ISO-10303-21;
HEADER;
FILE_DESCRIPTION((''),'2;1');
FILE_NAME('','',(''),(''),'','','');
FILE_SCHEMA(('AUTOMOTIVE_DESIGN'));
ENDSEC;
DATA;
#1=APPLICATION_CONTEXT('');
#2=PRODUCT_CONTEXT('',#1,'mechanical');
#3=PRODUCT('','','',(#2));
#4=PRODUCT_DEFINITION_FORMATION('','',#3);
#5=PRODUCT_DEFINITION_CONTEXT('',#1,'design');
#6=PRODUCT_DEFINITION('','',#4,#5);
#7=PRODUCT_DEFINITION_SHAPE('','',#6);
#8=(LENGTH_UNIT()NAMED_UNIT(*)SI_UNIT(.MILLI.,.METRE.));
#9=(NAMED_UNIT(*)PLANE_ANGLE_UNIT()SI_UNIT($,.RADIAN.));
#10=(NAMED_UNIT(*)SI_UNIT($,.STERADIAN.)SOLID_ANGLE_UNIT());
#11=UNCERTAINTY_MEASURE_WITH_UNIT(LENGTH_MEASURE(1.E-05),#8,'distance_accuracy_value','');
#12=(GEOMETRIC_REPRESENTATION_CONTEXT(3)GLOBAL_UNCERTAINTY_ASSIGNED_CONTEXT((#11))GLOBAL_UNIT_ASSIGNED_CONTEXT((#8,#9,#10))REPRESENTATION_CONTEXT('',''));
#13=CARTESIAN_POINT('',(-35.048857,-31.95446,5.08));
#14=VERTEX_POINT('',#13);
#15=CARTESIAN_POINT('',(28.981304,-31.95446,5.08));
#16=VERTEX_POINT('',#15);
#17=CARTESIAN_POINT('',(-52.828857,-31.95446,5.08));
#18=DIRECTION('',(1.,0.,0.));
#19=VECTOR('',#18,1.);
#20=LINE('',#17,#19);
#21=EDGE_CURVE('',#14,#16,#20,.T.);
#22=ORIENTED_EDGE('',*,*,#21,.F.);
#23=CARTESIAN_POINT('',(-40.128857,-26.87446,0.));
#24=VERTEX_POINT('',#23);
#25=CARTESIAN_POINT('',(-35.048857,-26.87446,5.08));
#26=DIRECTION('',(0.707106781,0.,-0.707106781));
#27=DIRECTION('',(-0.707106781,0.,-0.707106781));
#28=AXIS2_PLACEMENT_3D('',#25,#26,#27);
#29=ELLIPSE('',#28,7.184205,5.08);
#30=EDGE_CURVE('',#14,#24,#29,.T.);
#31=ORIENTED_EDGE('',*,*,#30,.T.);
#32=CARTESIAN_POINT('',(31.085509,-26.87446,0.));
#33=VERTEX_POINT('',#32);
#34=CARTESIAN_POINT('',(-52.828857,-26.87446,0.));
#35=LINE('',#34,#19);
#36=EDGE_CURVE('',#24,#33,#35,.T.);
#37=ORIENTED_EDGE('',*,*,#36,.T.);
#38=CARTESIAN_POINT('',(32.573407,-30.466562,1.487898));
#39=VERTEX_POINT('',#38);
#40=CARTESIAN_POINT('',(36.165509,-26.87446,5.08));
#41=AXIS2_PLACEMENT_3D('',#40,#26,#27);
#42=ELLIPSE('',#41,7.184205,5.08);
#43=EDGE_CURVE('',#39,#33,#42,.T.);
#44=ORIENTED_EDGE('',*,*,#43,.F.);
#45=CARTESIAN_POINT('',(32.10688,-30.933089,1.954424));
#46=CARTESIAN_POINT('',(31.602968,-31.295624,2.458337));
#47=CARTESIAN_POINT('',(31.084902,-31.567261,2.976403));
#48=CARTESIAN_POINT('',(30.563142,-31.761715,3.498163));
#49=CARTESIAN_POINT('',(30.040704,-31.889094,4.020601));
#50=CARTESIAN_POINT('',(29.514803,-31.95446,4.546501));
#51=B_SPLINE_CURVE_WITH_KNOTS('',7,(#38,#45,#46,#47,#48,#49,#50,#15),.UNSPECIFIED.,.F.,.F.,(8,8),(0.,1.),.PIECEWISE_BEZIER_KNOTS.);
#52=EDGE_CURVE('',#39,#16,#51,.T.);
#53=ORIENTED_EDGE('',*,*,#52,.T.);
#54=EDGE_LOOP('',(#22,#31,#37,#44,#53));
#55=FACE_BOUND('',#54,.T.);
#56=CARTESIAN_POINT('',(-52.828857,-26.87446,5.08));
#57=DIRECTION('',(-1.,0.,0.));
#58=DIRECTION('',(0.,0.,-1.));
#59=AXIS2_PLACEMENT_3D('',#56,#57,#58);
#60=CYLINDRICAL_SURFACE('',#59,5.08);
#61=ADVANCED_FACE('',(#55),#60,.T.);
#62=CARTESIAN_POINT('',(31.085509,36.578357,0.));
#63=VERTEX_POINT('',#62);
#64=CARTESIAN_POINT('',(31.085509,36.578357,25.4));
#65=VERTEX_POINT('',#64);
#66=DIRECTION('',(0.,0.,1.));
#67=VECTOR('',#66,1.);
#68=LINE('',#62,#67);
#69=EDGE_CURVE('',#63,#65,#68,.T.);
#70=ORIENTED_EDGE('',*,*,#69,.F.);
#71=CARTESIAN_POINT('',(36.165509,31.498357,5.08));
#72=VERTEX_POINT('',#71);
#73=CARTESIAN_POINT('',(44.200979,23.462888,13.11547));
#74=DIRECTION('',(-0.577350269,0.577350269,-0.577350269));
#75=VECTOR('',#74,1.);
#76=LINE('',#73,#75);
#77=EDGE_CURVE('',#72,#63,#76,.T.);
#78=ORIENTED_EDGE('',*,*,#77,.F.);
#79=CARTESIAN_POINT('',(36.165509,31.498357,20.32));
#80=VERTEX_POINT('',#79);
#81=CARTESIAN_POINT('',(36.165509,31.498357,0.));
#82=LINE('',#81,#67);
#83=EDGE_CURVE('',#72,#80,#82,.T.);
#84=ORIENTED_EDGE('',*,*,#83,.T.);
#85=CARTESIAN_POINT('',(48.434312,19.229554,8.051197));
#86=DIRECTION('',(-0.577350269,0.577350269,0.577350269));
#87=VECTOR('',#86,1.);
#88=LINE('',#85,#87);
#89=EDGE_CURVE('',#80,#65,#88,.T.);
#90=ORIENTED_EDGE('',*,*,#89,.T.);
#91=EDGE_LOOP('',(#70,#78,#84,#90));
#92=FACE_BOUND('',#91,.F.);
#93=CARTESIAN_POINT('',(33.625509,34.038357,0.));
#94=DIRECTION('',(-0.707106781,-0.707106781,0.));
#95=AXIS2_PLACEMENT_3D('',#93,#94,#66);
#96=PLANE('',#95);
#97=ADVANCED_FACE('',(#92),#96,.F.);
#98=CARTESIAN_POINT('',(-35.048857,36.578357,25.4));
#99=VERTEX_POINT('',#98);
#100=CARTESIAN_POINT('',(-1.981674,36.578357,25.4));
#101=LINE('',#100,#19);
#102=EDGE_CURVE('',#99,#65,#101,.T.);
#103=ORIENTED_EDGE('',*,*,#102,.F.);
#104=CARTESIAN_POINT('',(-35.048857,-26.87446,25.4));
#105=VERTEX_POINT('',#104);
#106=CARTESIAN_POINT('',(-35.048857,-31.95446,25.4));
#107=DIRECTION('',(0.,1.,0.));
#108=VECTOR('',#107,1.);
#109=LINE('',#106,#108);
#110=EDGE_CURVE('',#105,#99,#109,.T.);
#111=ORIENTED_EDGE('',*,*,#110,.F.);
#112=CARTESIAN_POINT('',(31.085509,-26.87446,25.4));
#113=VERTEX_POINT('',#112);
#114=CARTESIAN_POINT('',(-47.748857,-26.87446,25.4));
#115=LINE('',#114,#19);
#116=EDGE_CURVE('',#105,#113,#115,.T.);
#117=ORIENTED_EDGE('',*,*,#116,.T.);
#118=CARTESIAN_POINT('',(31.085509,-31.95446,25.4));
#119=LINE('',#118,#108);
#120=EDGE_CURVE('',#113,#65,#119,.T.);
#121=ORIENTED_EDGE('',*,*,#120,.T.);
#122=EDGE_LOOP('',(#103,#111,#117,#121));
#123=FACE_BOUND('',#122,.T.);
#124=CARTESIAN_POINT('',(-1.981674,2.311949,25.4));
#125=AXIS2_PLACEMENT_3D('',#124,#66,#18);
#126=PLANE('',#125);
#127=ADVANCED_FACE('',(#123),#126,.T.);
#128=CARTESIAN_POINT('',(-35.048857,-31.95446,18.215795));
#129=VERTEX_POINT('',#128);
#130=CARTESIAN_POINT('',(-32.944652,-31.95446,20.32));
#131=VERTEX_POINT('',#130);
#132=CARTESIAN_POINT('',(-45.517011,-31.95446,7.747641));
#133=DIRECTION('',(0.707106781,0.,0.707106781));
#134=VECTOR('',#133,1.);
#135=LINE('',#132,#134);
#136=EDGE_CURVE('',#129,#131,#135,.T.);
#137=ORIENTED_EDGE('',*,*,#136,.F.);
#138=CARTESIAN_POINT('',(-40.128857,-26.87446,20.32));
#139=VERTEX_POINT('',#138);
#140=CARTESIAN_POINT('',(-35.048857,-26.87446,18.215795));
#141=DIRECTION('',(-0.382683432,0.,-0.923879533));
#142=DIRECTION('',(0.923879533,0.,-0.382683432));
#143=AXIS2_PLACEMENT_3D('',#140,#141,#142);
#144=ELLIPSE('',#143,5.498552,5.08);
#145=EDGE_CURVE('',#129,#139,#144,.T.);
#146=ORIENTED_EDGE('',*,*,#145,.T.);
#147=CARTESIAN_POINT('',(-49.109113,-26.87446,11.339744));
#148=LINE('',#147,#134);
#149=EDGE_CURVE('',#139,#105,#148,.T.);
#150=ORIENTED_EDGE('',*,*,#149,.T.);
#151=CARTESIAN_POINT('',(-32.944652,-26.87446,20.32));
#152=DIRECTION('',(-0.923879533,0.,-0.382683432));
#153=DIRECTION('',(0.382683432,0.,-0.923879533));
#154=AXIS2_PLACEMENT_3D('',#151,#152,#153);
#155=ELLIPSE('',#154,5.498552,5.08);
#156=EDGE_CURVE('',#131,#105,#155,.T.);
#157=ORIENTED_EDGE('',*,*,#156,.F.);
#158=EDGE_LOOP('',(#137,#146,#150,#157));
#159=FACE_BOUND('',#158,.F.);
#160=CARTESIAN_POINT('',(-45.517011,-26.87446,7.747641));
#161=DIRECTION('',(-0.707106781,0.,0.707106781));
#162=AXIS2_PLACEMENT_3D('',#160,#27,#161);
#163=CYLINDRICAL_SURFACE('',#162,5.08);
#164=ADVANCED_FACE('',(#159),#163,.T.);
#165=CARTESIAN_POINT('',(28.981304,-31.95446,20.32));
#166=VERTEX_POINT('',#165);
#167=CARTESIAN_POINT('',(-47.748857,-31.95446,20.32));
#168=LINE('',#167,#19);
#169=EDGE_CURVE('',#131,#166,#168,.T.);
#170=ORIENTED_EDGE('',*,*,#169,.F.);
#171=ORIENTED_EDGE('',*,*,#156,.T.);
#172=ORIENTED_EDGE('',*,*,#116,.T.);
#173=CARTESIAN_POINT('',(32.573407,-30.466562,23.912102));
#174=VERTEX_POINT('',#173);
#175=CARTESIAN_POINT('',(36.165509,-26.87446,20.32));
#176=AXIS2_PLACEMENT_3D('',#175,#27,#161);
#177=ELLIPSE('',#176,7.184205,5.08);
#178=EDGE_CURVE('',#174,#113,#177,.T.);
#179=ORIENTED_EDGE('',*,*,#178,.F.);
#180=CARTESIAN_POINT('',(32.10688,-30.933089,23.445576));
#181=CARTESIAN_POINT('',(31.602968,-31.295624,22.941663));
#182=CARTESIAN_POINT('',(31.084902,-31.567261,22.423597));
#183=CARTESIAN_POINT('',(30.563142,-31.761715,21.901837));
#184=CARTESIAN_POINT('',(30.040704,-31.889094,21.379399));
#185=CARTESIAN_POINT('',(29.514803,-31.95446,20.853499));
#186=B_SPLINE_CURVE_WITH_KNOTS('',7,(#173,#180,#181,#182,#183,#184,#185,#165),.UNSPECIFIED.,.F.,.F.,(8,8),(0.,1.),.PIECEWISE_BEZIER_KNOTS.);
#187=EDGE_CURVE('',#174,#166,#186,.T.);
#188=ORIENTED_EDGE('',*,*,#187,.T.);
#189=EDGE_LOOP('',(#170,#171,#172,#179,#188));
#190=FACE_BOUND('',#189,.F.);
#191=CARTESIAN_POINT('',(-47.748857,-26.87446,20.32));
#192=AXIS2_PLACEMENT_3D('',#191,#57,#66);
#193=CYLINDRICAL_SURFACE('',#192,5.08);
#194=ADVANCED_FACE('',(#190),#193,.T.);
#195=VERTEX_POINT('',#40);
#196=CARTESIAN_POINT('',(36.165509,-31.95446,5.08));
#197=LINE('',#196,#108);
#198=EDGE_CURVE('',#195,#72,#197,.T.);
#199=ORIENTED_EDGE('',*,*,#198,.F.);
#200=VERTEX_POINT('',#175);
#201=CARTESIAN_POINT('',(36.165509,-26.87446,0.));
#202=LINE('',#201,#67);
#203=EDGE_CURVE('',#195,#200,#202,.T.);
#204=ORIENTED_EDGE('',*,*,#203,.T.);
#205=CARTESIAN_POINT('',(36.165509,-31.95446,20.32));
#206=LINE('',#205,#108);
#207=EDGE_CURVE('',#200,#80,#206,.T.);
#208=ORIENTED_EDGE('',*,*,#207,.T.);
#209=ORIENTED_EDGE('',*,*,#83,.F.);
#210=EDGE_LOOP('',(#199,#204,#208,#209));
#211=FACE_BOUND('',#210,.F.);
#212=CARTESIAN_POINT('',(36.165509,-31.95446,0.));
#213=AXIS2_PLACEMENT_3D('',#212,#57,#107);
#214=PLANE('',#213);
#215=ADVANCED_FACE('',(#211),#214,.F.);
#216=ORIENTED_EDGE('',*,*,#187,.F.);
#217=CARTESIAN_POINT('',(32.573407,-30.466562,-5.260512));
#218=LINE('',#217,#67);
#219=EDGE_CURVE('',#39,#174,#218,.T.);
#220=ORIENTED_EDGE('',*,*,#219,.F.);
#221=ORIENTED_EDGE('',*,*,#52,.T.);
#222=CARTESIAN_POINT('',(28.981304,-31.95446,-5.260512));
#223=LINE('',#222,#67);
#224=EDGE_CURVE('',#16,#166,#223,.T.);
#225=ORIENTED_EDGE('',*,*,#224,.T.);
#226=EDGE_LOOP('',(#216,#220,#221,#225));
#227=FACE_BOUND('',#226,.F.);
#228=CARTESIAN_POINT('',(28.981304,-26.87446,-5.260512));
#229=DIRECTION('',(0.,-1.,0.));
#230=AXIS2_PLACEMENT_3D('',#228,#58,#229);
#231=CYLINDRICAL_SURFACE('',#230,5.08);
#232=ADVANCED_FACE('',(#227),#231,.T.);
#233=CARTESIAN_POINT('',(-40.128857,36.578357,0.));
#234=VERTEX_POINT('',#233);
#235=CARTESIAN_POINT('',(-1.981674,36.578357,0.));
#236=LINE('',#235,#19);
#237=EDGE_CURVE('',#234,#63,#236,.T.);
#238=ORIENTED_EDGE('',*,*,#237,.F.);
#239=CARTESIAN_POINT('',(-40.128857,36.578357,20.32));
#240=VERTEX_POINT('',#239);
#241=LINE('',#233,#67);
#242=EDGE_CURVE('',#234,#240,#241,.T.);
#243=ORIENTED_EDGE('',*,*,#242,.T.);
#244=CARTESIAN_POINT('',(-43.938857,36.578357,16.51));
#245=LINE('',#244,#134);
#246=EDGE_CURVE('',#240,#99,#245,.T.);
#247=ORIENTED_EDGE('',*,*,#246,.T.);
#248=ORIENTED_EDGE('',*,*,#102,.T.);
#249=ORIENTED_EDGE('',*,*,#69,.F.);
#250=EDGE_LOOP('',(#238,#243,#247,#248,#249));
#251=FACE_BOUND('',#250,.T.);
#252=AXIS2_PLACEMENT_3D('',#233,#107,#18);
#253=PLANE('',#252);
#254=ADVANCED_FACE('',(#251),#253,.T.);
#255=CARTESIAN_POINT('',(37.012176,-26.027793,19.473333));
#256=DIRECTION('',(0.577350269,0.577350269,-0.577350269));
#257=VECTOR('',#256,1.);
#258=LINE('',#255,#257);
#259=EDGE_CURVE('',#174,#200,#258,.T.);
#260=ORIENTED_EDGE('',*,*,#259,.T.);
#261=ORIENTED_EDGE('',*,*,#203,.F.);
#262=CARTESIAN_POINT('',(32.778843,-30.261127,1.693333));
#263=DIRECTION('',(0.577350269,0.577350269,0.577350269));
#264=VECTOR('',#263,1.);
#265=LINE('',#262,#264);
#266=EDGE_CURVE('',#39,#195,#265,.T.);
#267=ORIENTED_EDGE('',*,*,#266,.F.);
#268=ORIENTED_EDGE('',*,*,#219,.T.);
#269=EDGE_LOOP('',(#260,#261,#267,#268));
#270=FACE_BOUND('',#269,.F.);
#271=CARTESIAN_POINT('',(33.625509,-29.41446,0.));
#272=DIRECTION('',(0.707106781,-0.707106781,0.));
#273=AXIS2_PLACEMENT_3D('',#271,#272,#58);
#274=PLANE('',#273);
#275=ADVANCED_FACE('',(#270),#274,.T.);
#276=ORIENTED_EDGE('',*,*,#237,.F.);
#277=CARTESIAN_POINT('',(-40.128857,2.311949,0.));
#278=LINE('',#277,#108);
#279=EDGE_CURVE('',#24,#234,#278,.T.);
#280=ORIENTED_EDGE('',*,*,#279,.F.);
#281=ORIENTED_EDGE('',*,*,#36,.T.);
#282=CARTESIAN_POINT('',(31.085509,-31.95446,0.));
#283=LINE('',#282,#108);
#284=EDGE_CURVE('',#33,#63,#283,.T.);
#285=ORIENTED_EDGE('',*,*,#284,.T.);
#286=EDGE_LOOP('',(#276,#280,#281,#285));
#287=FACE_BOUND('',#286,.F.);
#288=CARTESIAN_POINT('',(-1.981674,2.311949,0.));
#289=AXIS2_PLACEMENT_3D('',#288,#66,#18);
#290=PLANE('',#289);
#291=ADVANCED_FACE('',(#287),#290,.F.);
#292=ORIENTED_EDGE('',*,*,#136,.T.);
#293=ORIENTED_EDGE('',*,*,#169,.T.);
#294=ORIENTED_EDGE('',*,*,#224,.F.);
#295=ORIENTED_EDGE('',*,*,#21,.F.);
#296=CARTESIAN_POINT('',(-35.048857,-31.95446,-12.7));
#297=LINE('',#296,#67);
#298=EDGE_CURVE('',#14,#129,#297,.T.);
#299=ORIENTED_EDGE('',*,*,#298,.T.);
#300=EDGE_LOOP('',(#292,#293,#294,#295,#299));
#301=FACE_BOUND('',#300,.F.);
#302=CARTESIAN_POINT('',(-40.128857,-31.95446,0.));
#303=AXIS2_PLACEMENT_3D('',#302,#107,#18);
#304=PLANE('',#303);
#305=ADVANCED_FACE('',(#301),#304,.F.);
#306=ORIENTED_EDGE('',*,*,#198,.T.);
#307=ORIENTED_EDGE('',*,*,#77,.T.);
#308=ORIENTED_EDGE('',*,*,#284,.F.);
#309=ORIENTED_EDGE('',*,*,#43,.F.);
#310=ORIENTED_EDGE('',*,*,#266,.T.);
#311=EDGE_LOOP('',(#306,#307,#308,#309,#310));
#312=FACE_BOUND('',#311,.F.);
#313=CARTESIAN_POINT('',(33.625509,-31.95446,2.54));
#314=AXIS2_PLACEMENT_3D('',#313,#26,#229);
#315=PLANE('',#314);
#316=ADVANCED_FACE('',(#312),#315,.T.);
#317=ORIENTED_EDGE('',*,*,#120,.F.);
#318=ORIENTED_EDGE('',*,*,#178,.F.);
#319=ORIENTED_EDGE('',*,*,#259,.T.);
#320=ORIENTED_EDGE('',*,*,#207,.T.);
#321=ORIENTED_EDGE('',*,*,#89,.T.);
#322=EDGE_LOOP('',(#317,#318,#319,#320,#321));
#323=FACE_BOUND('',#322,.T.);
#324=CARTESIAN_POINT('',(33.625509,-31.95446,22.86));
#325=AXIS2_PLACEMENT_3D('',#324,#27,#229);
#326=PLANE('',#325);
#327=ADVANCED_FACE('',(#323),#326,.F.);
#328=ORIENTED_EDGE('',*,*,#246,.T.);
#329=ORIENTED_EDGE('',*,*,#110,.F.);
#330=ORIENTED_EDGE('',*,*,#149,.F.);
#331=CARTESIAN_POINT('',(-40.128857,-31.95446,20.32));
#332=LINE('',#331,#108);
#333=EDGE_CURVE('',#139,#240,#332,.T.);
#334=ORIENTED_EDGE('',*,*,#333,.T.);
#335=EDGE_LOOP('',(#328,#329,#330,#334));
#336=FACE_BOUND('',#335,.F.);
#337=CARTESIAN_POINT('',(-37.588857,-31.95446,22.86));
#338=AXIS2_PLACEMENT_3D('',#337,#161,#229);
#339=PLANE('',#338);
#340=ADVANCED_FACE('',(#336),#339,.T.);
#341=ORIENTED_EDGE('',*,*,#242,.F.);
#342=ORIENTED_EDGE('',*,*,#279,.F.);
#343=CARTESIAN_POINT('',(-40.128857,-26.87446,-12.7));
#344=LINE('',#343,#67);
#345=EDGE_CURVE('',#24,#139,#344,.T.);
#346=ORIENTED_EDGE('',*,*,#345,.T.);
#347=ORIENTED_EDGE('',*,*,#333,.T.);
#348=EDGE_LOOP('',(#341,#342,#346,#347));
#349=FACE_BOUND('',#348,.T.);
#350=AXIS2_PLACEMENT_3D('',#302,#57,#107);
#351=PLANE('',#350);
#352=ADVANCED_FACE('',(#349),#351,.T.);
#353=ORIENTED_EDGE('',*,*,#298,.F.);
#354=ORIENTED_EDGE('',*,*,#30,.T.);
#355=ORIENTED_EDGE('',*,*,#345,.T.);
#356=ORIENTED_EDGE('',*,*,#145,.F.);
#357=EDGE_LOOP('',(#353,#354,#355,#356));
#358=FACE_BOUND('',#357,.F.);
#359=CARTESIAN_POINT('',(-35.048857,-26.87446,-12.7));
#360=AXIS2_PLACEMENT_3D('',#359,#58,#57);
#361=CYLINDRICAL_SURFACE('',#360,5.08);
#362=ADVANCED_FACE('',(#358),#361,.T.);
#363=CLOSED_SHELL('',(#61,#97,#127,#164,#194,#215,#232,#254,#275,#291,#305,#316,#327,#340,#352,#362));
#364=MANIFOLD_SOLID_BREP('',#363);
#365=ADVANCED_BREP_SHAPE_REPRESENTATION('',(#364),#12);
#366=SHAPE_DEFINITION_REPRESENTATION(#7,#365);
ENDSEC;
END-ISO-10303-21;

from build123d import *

# Parameters (mm, degrees)
F0_W        = 76.2943662703
F0_H        = 68.5328170657
F1_DEPTH    = 25.4
F2_SIZE     = 5.08
F3_T1_DEPTH = 45.72
F3_T3_DEPTH = 32.5842048969
F3_T5_DEPTH = 96.6143662703
F3_T7_DEPTH = 91.5343662703
F3_T9_DEPTH = 35.9210244843


# Not quite as in the source:
# - a fillet or chamfer that OpenCascade refuses, or shapes differently, is made with other operations: its cross-section is extruded or revolved along the edge and cut away or added


with BuildPart() as f1:
    # F0 (on Top) → F1 (new body)
    with BuildSketch(Plane.XY):
        with Locations((-1.9816737622, 2.3119486868)):
            Rectangle(F0_W, F0_H)
    extrude(amount=F1_DEPTH)

    # F2
    f2_edges = [f1.edges().sort_by_distance(p)[0] for p in [
        (36.165509, -31.95446, 12.7),
        (36.165509, 36.578357, 12.7),
        (36.165509, 2.311949, 0),
        (36.165509, 2.311949, 25.4),
        (-40.128857, 2.311949, 25.4),
    ]]
    chamfer(f2_edges, length=F2_SIZE)

    # F3: fillet of radius 5.08 on 5 edges, made by hand

    # F3_s2 → F3_t1 (cut)
    with BuildSketch(Plane.XY.offset(-12.7)):
        with BuildLine():
            ThreePointArc((-40.1288568974, -26.874459846), (-38.6409593458, -30.4665622944), (-35.0488568974, -31.954459846))
            Line((-35.0488568974, -31.954459846), (-40.1288568974, -31.954459846))
            Line((-40.1288568974, -31.954459846), (-40.1288568974, -26.874459846))
        make_face()
    extrude(amount=F3_T1_DEPTH, mode=Mode.SUBTRACT)

    # F3_s4 → F3_t3 (cut)
    with BuildSketch(Plane(origin=(-18.8846845697, 0, -18.8846845697), x_dir=(0, 1, 0), z_dir=(0.7071067812, 0, 0.7071067812))):
        with BuildLine():
            ThreePointArc((-26.874459846, 42.7437966271), (-30.4665622944, 41.2558990755), (-31.954459846, 37.6637966271))
            Line((-31.954459846, 37.6637966271), (-31.954459846, 42.7437966271))
            Line((-31.954459846, 42.7437966271), (-26.874459846, 42.7437966271))
        make_face()
    extrude(amount=F3_T3_DEPTH, mode=Mode.SUBTRACT)

    # F3_s6 → F3_t5 (cut)
    with BuildSketch(Plane.YZ.offset(-52.8288568974)):
        with BuildLine():
            ThreePointArc((-26.874459846, 0), (-30.4665622944, 1.4878975516), (-31.954459846, 5.08))
            Line((-31.954459846, 5.08), (-31.954459846, 0))
            Line((-31.954459846, 0), (-26.874459846, 0))
        make_face()
    extrude(amount=F3_T5_DEPTH, mode=Mode.SUBTRACT)

    # F3_s8 → F3_t7 (cut)
    with BuildSketch(Plane.YZ.offset(-47.7488568974)):
        with BuildLine():
            ThreePointArc((-26.874459846, 25.4), (-30.4665622944, 23.9121024484), (-31.954459846, 20.32))
            Line((-31.954459846, 20.32), (-31.954459846, 25.4))
            Line((-31.954459846, 25.4), (-26.874459846, 25.4))
        make_face()
    extrude(amount=F3_T7_DEPTH, mode=Mode.SUBTRACT)

    # F3_s10 → F3_t9 (cut)
    with BuildSketch(Plane.XY.offset(-5.2605122421)):
        with BuildLine():
            ThreePointArc((28.9813044761, -31.954459846), (30.9253363125, -31.5677678712), (32.5734069245, -30.4665622944))
            Line((32.5734069245, -30.4665622944), (31.0855093729, -31.954459846))
            Line((31.0855093729, -31.954459846), (28.9813044761, -31.954459846))
        make_face()
    extrude(amount=F3_T9_DEPTH, mode=Mode.SUBTRACT)


solid = f1.part
